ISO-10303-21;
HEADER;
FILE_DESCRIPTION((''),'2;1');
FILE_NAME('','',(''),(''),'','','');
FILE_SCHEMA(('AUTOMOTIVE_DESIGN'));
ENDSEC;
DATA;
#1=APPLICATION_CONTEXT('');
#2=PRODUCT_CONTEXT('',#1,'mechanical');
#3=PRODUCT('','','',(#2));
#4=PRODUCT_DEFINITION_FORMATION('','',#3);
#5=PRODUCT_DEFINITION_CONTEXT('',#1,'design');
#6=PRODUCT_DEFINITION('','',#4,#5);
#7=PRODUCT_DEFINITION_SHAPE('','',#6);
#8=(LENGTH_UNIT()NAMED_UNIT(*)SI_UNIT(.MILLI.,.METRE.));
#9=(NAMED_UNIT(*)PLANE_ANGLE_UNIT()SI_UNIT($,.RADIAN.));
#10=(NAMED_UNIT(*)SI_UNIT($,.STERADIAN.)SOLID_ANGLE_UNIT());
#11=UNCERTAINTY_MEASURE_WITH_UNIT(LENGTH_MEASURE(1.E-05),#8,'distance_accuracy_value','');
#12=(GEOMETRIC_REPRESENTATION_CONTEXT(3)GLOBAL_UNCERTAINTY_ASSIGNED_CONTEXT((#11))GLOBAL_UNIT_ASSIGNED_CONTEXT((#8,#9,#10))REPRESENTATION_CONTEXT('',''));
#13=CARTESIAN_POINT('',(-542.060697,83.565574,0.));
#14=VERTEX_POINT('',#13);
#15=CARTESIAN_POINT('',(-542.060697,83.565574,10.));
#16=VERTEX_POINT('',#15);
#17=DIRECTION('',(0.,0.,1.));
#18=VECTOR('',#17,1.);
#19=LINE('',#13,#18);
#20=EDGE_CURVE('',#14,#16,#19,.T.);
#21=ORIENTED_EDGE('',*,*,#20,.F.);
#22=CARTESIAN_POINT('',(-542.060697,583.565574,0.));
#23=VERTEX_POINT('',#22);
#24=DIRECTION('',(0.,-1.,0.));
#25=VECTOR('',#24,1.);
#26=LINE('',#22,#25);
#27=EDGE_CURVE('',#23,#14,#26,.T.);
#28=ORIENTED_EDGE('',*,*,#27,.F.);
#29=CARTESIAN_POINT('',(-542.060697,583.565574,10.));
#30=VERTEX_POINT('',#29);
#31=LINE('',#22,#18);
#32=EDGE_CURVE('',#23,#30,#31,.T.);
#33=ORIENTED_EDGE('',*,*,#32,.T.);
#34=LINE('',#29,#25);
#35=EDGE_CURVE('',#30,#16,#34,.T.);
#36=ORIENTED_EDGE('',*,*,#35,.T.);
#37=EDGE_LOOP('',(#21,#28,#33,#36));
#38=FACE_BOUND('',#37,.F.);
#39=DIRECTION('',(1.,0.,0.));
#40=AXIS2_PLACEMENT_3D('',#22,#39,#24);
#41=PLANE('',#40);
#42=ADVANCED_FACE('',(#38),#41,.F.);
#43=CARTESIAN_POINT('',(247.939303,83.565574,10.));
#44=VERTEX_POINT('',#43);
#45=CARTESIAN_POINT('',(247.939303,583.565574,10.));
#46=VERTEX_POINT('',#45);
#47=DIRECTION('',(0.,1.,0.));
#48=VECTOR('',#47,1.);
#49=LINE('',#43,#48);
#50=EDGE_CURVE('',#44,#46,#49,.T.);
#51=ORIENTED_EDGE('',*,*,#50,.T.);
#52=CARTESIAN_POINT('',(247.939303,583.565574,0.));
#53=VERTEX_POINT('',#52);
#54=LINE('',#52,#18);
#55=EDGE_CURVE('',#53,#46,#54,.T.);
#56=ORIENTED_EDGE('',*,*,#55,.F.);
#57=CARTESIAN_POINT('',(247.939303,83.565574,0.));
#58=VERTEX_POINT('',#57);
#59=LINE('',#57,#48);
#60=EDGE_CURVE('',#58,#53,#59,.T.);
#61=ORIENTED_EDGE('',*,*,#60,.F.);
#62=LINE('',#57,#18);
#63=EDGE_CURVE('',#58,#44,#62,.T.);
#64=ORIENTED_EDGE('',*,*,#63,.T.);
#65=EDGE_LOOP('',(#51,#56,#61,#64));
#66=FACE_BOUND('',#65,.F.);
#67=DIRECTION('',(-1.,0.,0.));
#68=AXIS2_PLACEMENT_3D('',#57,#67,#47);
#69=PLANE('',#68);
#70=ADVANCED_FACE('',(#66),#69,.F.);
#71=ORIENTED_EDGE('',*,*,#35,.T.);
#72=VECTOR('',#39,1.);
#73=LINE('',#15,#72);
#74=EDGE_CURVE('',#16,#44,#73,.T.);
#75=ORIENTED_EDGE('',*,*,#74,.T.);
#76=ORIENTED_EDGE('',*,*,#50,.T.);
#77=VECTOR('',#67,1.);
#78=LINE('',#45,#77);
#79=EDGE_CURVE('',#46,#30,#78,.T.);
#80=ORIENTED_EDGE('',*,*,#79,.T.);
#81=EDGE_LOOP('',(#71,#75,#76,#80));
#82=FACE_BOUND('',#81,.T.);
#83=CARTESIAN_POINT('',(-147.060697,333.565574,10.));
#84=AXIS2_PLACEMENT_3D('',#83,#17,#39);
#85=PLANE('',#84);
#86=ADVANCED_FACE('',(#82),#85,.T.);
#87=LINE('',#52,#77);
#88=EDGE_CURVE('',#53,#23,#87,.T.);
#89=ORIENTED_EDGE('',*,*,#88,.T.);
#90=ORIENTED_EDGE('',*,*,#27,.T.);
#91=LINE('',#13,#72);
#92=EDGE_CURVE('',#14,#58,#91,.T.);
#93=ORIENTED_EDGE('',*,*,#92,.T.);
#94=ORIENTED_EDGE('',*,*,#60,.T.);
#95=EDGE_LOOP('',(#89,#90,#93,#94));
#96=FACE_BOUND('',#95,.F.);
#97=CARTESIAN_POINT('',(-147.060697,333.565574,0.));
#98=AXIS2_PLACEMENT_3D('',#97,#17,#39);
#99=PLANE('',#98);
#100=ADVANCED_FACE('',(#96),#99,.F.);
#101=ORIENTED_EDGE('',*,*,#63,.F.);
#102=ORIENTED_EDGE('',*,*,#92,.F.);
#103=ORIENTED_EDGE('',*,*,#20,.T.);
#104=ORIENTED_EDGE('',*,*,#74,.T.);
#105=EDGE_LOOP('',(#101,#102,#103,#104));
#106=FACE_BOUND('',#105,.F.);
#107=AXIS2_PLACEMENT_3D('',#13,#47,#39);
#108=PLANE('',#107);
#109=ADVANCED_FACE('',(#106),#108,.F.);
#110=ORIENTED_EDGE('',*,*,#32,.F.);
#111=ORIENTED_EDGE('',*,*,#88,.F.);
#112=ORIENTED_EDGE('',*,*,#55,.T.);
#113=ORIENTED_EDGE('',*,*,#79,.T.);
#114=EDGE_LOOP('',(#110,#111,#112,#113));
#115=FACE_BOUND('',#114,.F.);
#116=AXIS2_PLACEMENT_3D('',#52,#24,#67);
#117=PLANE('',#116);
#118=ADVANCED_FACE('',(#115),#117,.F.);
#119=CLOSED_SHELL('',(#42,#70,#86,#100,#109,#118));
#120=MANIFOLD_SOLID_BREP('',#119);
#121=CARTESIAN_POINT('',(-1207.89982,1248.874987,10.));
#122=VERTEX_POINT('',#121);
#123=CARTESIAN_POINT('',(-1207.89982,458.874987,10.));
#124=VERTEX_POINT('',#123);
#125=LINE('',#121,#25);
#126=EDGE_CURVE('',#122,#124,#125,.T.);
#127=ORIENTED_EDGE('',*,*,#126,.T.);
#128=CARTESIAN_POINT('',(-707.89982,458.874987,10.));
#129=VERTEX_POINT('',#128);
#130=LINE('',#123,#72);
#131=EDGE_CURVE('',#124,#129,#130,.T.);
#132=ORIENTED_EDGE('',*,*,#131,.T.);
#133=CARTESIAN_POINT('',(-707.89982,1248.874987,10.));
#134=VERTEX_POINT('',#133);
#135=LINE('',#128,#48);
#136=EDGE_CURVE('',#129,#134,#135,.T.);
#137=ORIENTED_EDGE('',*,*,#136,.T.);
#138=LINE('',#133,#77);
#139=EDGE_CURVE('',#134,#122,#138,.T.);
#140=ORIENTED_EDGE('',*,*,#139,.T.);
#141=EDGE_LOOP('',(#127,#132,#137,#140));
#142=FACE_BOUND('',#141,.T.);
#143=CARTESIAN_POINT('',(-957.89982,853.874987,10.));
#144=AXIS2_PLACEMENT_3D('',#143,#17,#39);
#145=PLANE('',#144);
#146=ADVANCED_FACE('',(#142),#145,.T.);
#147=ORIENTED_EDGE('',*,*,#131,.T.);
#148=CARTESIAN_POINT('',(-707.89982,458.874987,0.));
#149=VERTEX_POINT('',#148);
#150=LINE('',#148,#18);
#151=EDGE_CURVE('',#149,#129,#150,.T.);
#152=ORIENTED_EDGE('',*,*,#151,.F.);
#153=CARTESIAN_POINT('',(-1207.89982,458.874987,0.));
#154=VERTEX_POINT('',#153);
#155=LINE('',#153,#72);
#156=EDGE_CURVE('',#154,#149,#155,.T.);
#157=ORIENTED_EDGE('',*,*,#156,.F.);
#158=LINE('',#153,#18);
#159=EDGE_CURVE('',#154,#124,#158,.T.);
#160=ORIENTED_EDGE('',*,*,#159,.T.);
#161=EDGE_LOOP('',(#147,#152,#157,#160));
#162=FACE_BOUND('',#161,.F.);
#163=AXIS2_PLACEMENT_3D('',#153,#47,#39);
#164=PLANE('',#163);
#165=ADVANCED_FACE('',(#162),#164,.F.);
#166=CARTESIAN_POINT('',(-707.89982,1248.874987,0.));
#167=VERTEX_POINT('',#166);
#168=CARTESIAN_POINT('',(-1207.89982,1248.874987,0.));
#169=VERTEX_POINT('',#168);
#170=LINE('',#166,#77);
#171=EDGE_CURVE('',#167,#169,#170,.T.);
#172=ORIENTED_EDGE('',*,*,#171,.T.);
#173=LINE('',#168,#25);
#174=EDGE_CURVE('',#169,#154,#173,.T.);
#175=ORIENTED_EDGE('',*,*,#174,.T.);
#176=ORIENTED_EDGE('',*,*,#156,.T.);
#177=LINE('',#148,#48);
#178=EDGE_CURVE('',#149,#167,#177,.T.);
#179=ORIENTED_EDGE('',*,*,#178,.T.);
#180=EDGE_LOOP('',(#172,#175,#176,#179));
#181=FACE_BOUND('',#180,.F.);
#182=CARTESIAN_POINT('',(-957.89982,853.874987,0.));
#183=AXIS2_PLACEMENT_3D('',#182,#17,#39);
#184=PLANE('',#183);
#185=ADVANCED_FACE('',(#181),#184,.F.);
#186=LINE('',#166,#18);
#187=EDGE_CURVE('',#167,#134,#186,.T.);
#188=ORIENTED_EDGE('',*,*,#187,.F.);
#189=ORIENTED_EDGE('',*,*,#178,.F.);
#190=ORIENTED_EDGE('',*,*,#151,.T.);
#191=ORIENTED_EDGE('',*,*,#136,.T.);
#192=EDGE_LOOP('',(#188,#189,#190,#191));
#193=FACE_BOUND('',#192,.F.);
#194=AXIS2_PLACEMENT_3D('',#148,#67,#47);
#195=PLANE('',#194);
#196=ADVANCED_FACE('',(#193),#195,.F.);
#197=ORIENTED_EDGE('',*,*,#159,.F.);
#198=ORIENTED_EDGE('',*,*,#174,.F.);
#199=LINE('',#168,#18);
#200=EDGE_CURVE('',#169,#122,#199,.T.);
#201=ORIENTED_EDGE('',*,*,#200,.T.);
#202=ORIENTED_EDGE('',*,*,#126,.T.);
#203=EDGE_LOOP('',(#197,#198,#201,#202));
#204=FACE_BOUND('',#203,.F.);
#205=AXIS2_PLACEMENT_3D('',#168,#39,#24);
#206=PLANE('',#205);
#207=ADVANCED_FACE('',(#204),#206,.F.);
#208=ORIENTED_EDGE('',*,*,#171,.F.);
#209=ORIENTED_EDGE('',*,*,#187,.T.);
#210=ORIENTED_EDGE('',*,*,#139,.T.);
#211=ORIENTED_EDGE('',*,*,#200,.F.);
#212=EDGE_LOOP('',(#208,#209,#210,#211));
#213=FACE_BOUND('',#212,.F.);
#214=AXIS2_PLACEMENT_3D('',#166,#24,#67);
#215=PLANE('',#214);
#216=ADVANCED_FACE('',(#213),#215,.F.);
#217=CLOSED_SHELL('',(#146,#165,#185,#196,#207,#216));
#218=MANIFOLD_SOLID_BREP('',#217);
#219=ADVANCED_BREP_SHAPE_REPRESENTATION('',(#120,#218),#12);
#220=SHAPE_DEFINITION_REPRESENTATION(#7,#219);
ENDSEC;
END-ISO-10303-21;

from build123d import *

# Parameters (mm, degrees)
F0_W     = 450
F0_H     = 25
F0_W_2   = 25
F0_H_2   = 740
F1_DEPTH = 10
F0_H_3   = 450
F0_W_3   = 740


# Not quite as in the source:
# - a feature names something its author has since deleted; it is built from what else it names


with BuildPart() as f1:
    # F0 (on Top) → F1 (new body)
    with BuildSketch(Plane.XY):
        Polygon((-1182.8998201413, 1223.8749871956), (-1182.8998201413, 953.8749871956), (-1182.8998201413, 653.8749871956), (-1182.8998201413, 483.8749871956), (-732.8998201413, 483.8749871956), (-732.8998201413, 1223.8749871956), align=None)
        Polygon((-1182.8998201413, 653.8749871956), (-1182.8998201413, 953.8749871956), (-1182.8998201413, 1223.8749871956), (-1182.8998201413, 1248.8749871956), (-1207.8998201413, 1248.8749871956), (-1207.8998201413, 483.8749871956), (-1182.8998201413, 483.8749871956), align=None)
        with Locations((-957.8998201413, 1236.3749871956)):
            Rectangle(F0_W, F0_H)
        with Locations((-957.8998201413, 471.3749871956)):
            Rectangle(F0_W, F0_H)
        with Locations((-1195.3998201413, 471.3749871956)):
            Rectangle(F0_W_2, F0_H)
        with Locations((-720.3998201413, 853.8749871956)):
            Rectangle(F0_W_2, F0_H_2)
        with Locations((-720.3998201413, 1236.3749871956)):
            Rectangle(F0_W_2, F0_H)
        with Locations((-720.3998201413, 471.3749871956)):
            Rectangle(F0_W_2, F0_H)
    extrude(amount=F1_DEPTH)


with BuildPart() as f1b:
    # F0 (on Top) → F1, piece 2 (new body)
    with BuildSketch(Plane.XY):
        Polygon((-517.0606966229, 108.5655740079), (-347.0606966229, 108.5655740079), (-47.0606966229, 108.5655740079), (222.9393033771, 108.5655740079), (222.9393033771, 558.5655740079), (-517.0606966229, 558.5655740079), align=None)
        Polygon((-47.0606966229, 108.5655740079), (-347.0606966229, 108.5655740079), (-517.0606966229, 108.5655740079), (-517.0606966229, 83.5655740079), (-309.5606966229, 83.5655740079), (-284.5606966229, 83.5655740079), (-9.5606966229, 83.5655740079), (15.4393033771, 83.5655740079), (247.9393033771, 83.5655740079), (247.9393033771, 108.5655740079), (222.9393033771, 108.5655740079), align=None)
        with Locations((-529.5606966229, 96.0655740079)):
            Rectangle(F0_W_2, F0_H)
        with Locations((-529.5606966229, 333.5655740079)):
            Rectangle(F0_W_2, F0_H_3)
        with Locations((235.4393033771, 333.5655740079)):
            Rectangle(F0_W_2, F0_H_3)
        with Locations((-147.0606966229, 571.0655740079)):
            Rectangle(F0_W_3, F0_H)
        with Locations((-529.5606966229, 571.0655740079)):
            Rectangle(F0_W_2, F0_H)
        with Locations((235.4393033771, 571.0655740079)):
            Rectangle(F0_W_2, F0_H)
    extrude(amount=F1_DEPTH)


solid = Compound([f1.part, f1b.part])
